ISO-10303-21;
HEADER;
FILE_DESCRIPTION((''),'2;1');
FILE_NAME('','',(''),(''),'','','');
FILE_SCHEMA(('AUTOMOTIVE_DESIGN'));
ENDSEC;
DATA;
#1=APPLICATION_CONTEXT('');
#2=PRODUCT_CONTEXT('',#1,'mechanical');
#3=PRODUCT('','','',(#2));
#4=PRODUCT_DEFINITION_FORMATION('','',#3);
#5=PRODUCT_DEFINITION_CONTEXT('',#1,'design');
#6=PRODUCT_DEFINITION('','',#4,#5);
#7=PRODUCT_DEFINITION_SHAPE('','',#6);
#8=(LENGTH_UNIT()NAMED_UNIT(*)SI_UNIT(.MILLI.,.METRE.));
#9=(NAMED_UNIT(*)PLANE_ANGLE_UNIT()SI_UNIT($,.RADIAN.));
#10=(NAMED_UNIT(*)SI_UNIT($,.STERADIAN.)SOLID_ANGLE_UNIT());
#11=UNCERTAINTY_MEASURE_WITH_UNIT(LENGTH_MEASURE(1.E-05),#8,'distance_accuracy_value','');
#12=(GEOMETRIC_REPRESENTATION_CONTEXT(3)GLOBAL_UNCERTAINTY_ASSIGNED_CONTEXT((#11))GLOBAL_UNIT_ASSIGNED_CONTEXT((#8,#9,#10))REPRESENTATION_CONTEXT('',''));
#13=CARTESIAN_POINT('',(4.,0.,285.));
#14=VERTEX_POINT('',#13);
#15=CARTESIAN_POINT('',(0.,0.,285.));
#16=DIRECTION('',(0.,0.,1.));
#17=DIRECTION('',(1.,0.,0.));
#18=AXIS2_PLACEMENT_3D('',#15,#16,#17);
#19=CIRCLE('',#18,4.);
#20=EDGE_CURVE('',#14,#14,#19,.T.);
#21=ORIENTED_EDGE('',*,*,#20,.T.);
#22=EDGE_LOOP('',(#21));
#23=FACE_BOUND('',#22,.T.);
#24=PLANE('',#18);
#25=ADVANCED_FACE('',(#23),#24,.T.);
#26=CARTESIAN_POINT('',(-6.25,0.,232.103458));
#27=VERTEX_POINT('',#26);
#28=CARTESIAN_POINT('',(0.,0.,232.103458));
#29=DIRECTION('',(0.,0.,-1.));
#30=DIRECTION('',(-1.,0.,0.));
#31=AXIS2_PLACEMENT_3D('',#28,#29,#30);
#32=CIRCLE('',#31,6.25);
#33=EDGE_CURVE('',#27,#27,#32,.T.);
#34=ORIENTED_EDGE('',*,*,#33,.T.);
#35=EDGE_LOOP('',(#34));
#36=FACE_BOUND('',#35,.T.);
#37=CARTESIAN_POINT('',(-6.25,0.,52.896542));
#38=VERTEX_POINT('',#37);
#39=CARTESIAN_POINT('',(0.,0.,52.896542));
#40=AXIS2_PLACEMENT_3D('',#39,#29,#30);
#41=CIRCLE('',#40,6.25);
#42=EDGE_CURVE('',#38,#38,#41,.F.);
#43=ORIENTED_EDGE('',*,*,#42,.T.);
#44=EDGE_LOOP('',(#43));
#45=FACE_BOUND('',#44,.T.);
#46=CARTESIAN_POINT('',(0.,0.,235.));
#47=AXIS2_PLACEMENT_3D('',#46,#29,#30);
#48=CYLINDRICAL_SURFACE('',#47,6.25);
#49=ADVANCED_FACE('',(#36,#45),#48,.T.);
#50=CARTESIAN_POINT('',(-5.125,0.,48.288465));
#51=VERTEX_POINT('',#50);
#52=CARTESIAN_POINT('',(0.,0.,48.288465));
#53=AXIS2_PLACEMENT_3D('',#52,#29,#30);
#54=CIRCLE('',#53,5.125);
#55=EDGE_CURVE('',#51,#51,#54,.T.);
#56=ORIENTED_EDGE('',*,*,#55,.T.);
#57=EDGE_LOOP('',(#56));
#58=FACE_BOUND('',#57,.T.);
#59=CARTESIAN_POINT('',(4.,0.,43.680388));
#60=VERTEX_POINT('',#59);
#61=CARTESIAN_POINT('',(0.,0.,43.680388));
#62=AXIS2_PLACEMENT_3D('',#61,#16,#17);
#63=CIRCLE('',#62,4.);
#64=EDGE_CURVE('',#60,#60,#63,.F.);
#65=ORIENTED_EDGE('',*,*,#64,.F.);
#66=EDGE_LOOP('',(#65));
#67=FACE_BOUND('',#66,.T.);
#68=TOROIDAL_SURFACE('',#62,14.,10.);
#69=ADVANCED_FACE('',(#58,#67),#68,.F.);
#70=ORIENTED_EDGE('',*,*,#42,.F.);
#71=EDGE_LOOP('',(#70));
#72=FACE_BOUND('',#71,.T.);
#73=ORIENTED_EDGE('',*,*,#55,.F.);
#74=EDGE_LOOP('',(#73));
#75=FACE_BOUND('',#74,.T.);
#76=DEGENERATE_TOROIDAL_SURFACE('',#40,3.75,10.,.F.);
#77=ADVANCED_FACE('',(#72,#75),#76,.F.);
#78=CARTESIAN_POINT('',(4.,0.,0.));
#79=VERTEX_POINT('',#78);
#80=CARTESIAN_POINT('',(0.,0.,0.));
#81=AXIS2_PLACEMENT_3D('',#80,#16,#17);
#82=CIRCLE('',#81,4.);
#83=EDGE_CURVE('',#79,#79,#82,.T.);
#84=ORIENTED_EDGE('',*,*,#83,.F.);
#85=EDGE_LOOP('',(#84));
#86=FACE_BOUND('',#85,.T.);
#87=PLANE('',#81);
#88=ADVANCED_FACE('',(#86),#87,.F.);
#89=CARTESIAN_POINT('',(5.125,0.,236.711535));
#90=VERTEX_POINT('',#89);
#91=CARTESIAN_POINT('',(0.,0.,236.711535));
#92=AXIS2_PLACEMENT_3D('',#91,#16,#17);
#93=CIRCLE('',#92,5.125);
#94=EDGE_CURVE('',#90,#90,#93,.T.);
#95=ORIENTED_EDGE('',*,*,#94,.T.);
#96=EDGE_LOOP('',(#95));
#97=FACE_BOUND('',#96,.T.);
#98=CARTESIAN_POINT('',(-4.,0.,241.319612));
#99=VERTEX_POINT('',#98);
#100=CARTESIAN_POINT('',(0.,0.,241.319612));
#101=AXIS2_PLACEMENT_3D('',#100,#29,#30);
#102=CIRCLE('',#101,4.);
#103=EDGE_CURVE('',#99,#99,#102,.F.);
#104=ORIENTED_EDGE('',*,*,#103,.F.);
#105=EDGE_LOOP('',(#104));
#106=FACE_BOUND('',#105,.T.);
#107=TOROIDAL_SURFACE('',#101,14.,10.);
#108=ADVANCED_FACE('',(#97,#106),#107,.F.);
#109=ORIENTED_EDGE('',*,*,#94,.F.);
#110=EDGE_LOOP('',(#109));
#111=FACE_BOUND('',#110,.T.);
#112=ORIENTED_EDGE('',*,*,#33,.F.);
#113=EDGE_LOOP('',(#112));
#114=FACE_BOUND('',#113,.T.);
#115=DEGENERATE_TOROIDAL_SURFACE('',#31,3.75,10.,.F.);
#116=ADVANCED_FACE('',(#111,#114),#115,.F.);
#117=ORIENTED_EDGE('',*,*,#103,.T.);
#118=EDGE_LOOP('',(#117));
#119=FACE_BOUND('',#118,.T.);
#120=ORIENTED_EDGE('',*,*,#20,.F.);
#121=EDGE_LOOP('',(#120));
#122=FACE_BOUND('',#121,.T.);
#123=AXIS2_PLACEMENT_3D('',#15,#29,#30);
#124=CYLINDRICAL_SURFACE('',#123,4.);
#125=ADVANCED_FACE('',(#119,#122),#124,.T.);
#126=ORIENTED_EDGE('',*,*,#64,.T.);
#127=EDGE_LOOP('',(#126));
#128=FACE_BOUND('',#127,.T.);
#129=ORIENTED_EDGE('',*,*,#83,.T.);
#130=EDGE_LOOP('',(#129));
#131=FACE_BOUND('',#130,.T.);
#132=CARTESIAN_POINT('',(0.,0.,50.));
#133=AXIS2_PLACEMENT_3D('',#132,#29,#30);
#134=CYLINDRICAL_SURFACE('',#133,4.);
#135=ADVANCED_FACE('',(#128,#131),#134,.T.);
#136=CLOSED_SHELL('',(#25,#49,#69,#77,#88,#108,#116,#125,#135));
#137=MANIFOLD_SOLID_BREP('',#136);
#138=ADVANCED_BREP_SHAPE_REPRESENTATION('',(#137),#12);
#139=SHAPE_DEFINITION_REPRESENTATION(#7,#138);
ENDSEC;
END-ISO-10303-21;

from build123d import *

# Parameters (mm, degrees)
SKETCH1_R           = 4
BOSS_EXTRUDE1_DEPTH = 50
SKETCH2_R           = 6.25
BOSS_EXTRUDE2_DEPTH = 185
SKETCH3_R           = 4
BOSS_EXTRUDE3_DEPTH = 50
FILLET1_R           = 10
FILLET2_R           = 10


with BuildPart() as part:
    # Sketch1 → Boss-Extrude1 (new body)
    with BuildSketch(Plane.XY):
        Circle(SKETCH1_R)
    extrude(amount=BOSS_EXTRUDE1_DEPTH)

    # Sketch2 → Boss-Extrude2 (add)
    with BuildSketch(Plane.XY.offset(50)):
        Circle(SKETCH2_R)
    extrude(amount=BOSS_EXTRUDE2_DEPTH)

    # Sketch3 → Boss-Extrude3 (add)
    with BuildSketch(Plane.XY.offset(235)):
        Circle(SKETCH3_R)
    extrude(amount=BOSS_EXTRUDE3_DEPTH)

    # Fillet1
    # the kernel refuses this fillet: 10 mm, written as the material it adds along each edge
    with BuildSketch(Plane(origin=(0, 0, 235), x_dir=(1, 0, 0), z_dir=(0, -1, 0))) as fillet1_piece_1:
        with BuildLine():
            CenterArc((14, 6.31961233), FILLET1_R, 180, 39.194967426)
            Line((4, 6.31961233), (3.8, 6.31961233))
            Line((3.8, 6.31961233), (3.8, 0))
            Line((3.8, 0), (4, -0.2))
            ThreePointArc((4, -0.2), (5.125, -0.2), (6.095, -0.126392247))
            Line((6.095, -0.126392247), (6.25, 0))
        make_face()
    revolve(axis=Axis((0, 0, 235), (0, 0, 1)))
    with BuildSketch(Plane(origin=(0, 0, 50), x_dir=(1, 0, 0), z_dir=(0, -1, 0))) as fillet1_piece_2:
        with BuildLine():
            CenterArc((14, -6.31961233), FILLET1_R, 140.805032574, 39.194967426)
            Line((4, -6.31961233), (3.8, -6.31961233))
            Line((3.8, -6.31961233), (3.8, 0))
            Line((3.8, 0), (4, 0.2))
            ThreePointArc((4, 0.2), (5.125, 0.2), (6.095, 0.126392247))
            Line((6.095, 0.126392247), (6.25, 0))
        make_face()
    revolve(axis=Axis((0, 0, 50), (0, 0, 1)))

    # Fillet2
    fillet2_edges = [part.edges().sort_by_distance(p)[0] for p in [
        (-6.25, 0, 50),
        (-6.25, 0, 235),
    ]]
    fillet(fillet2_edges, radius=FILLET2_R)


solid = part.part
